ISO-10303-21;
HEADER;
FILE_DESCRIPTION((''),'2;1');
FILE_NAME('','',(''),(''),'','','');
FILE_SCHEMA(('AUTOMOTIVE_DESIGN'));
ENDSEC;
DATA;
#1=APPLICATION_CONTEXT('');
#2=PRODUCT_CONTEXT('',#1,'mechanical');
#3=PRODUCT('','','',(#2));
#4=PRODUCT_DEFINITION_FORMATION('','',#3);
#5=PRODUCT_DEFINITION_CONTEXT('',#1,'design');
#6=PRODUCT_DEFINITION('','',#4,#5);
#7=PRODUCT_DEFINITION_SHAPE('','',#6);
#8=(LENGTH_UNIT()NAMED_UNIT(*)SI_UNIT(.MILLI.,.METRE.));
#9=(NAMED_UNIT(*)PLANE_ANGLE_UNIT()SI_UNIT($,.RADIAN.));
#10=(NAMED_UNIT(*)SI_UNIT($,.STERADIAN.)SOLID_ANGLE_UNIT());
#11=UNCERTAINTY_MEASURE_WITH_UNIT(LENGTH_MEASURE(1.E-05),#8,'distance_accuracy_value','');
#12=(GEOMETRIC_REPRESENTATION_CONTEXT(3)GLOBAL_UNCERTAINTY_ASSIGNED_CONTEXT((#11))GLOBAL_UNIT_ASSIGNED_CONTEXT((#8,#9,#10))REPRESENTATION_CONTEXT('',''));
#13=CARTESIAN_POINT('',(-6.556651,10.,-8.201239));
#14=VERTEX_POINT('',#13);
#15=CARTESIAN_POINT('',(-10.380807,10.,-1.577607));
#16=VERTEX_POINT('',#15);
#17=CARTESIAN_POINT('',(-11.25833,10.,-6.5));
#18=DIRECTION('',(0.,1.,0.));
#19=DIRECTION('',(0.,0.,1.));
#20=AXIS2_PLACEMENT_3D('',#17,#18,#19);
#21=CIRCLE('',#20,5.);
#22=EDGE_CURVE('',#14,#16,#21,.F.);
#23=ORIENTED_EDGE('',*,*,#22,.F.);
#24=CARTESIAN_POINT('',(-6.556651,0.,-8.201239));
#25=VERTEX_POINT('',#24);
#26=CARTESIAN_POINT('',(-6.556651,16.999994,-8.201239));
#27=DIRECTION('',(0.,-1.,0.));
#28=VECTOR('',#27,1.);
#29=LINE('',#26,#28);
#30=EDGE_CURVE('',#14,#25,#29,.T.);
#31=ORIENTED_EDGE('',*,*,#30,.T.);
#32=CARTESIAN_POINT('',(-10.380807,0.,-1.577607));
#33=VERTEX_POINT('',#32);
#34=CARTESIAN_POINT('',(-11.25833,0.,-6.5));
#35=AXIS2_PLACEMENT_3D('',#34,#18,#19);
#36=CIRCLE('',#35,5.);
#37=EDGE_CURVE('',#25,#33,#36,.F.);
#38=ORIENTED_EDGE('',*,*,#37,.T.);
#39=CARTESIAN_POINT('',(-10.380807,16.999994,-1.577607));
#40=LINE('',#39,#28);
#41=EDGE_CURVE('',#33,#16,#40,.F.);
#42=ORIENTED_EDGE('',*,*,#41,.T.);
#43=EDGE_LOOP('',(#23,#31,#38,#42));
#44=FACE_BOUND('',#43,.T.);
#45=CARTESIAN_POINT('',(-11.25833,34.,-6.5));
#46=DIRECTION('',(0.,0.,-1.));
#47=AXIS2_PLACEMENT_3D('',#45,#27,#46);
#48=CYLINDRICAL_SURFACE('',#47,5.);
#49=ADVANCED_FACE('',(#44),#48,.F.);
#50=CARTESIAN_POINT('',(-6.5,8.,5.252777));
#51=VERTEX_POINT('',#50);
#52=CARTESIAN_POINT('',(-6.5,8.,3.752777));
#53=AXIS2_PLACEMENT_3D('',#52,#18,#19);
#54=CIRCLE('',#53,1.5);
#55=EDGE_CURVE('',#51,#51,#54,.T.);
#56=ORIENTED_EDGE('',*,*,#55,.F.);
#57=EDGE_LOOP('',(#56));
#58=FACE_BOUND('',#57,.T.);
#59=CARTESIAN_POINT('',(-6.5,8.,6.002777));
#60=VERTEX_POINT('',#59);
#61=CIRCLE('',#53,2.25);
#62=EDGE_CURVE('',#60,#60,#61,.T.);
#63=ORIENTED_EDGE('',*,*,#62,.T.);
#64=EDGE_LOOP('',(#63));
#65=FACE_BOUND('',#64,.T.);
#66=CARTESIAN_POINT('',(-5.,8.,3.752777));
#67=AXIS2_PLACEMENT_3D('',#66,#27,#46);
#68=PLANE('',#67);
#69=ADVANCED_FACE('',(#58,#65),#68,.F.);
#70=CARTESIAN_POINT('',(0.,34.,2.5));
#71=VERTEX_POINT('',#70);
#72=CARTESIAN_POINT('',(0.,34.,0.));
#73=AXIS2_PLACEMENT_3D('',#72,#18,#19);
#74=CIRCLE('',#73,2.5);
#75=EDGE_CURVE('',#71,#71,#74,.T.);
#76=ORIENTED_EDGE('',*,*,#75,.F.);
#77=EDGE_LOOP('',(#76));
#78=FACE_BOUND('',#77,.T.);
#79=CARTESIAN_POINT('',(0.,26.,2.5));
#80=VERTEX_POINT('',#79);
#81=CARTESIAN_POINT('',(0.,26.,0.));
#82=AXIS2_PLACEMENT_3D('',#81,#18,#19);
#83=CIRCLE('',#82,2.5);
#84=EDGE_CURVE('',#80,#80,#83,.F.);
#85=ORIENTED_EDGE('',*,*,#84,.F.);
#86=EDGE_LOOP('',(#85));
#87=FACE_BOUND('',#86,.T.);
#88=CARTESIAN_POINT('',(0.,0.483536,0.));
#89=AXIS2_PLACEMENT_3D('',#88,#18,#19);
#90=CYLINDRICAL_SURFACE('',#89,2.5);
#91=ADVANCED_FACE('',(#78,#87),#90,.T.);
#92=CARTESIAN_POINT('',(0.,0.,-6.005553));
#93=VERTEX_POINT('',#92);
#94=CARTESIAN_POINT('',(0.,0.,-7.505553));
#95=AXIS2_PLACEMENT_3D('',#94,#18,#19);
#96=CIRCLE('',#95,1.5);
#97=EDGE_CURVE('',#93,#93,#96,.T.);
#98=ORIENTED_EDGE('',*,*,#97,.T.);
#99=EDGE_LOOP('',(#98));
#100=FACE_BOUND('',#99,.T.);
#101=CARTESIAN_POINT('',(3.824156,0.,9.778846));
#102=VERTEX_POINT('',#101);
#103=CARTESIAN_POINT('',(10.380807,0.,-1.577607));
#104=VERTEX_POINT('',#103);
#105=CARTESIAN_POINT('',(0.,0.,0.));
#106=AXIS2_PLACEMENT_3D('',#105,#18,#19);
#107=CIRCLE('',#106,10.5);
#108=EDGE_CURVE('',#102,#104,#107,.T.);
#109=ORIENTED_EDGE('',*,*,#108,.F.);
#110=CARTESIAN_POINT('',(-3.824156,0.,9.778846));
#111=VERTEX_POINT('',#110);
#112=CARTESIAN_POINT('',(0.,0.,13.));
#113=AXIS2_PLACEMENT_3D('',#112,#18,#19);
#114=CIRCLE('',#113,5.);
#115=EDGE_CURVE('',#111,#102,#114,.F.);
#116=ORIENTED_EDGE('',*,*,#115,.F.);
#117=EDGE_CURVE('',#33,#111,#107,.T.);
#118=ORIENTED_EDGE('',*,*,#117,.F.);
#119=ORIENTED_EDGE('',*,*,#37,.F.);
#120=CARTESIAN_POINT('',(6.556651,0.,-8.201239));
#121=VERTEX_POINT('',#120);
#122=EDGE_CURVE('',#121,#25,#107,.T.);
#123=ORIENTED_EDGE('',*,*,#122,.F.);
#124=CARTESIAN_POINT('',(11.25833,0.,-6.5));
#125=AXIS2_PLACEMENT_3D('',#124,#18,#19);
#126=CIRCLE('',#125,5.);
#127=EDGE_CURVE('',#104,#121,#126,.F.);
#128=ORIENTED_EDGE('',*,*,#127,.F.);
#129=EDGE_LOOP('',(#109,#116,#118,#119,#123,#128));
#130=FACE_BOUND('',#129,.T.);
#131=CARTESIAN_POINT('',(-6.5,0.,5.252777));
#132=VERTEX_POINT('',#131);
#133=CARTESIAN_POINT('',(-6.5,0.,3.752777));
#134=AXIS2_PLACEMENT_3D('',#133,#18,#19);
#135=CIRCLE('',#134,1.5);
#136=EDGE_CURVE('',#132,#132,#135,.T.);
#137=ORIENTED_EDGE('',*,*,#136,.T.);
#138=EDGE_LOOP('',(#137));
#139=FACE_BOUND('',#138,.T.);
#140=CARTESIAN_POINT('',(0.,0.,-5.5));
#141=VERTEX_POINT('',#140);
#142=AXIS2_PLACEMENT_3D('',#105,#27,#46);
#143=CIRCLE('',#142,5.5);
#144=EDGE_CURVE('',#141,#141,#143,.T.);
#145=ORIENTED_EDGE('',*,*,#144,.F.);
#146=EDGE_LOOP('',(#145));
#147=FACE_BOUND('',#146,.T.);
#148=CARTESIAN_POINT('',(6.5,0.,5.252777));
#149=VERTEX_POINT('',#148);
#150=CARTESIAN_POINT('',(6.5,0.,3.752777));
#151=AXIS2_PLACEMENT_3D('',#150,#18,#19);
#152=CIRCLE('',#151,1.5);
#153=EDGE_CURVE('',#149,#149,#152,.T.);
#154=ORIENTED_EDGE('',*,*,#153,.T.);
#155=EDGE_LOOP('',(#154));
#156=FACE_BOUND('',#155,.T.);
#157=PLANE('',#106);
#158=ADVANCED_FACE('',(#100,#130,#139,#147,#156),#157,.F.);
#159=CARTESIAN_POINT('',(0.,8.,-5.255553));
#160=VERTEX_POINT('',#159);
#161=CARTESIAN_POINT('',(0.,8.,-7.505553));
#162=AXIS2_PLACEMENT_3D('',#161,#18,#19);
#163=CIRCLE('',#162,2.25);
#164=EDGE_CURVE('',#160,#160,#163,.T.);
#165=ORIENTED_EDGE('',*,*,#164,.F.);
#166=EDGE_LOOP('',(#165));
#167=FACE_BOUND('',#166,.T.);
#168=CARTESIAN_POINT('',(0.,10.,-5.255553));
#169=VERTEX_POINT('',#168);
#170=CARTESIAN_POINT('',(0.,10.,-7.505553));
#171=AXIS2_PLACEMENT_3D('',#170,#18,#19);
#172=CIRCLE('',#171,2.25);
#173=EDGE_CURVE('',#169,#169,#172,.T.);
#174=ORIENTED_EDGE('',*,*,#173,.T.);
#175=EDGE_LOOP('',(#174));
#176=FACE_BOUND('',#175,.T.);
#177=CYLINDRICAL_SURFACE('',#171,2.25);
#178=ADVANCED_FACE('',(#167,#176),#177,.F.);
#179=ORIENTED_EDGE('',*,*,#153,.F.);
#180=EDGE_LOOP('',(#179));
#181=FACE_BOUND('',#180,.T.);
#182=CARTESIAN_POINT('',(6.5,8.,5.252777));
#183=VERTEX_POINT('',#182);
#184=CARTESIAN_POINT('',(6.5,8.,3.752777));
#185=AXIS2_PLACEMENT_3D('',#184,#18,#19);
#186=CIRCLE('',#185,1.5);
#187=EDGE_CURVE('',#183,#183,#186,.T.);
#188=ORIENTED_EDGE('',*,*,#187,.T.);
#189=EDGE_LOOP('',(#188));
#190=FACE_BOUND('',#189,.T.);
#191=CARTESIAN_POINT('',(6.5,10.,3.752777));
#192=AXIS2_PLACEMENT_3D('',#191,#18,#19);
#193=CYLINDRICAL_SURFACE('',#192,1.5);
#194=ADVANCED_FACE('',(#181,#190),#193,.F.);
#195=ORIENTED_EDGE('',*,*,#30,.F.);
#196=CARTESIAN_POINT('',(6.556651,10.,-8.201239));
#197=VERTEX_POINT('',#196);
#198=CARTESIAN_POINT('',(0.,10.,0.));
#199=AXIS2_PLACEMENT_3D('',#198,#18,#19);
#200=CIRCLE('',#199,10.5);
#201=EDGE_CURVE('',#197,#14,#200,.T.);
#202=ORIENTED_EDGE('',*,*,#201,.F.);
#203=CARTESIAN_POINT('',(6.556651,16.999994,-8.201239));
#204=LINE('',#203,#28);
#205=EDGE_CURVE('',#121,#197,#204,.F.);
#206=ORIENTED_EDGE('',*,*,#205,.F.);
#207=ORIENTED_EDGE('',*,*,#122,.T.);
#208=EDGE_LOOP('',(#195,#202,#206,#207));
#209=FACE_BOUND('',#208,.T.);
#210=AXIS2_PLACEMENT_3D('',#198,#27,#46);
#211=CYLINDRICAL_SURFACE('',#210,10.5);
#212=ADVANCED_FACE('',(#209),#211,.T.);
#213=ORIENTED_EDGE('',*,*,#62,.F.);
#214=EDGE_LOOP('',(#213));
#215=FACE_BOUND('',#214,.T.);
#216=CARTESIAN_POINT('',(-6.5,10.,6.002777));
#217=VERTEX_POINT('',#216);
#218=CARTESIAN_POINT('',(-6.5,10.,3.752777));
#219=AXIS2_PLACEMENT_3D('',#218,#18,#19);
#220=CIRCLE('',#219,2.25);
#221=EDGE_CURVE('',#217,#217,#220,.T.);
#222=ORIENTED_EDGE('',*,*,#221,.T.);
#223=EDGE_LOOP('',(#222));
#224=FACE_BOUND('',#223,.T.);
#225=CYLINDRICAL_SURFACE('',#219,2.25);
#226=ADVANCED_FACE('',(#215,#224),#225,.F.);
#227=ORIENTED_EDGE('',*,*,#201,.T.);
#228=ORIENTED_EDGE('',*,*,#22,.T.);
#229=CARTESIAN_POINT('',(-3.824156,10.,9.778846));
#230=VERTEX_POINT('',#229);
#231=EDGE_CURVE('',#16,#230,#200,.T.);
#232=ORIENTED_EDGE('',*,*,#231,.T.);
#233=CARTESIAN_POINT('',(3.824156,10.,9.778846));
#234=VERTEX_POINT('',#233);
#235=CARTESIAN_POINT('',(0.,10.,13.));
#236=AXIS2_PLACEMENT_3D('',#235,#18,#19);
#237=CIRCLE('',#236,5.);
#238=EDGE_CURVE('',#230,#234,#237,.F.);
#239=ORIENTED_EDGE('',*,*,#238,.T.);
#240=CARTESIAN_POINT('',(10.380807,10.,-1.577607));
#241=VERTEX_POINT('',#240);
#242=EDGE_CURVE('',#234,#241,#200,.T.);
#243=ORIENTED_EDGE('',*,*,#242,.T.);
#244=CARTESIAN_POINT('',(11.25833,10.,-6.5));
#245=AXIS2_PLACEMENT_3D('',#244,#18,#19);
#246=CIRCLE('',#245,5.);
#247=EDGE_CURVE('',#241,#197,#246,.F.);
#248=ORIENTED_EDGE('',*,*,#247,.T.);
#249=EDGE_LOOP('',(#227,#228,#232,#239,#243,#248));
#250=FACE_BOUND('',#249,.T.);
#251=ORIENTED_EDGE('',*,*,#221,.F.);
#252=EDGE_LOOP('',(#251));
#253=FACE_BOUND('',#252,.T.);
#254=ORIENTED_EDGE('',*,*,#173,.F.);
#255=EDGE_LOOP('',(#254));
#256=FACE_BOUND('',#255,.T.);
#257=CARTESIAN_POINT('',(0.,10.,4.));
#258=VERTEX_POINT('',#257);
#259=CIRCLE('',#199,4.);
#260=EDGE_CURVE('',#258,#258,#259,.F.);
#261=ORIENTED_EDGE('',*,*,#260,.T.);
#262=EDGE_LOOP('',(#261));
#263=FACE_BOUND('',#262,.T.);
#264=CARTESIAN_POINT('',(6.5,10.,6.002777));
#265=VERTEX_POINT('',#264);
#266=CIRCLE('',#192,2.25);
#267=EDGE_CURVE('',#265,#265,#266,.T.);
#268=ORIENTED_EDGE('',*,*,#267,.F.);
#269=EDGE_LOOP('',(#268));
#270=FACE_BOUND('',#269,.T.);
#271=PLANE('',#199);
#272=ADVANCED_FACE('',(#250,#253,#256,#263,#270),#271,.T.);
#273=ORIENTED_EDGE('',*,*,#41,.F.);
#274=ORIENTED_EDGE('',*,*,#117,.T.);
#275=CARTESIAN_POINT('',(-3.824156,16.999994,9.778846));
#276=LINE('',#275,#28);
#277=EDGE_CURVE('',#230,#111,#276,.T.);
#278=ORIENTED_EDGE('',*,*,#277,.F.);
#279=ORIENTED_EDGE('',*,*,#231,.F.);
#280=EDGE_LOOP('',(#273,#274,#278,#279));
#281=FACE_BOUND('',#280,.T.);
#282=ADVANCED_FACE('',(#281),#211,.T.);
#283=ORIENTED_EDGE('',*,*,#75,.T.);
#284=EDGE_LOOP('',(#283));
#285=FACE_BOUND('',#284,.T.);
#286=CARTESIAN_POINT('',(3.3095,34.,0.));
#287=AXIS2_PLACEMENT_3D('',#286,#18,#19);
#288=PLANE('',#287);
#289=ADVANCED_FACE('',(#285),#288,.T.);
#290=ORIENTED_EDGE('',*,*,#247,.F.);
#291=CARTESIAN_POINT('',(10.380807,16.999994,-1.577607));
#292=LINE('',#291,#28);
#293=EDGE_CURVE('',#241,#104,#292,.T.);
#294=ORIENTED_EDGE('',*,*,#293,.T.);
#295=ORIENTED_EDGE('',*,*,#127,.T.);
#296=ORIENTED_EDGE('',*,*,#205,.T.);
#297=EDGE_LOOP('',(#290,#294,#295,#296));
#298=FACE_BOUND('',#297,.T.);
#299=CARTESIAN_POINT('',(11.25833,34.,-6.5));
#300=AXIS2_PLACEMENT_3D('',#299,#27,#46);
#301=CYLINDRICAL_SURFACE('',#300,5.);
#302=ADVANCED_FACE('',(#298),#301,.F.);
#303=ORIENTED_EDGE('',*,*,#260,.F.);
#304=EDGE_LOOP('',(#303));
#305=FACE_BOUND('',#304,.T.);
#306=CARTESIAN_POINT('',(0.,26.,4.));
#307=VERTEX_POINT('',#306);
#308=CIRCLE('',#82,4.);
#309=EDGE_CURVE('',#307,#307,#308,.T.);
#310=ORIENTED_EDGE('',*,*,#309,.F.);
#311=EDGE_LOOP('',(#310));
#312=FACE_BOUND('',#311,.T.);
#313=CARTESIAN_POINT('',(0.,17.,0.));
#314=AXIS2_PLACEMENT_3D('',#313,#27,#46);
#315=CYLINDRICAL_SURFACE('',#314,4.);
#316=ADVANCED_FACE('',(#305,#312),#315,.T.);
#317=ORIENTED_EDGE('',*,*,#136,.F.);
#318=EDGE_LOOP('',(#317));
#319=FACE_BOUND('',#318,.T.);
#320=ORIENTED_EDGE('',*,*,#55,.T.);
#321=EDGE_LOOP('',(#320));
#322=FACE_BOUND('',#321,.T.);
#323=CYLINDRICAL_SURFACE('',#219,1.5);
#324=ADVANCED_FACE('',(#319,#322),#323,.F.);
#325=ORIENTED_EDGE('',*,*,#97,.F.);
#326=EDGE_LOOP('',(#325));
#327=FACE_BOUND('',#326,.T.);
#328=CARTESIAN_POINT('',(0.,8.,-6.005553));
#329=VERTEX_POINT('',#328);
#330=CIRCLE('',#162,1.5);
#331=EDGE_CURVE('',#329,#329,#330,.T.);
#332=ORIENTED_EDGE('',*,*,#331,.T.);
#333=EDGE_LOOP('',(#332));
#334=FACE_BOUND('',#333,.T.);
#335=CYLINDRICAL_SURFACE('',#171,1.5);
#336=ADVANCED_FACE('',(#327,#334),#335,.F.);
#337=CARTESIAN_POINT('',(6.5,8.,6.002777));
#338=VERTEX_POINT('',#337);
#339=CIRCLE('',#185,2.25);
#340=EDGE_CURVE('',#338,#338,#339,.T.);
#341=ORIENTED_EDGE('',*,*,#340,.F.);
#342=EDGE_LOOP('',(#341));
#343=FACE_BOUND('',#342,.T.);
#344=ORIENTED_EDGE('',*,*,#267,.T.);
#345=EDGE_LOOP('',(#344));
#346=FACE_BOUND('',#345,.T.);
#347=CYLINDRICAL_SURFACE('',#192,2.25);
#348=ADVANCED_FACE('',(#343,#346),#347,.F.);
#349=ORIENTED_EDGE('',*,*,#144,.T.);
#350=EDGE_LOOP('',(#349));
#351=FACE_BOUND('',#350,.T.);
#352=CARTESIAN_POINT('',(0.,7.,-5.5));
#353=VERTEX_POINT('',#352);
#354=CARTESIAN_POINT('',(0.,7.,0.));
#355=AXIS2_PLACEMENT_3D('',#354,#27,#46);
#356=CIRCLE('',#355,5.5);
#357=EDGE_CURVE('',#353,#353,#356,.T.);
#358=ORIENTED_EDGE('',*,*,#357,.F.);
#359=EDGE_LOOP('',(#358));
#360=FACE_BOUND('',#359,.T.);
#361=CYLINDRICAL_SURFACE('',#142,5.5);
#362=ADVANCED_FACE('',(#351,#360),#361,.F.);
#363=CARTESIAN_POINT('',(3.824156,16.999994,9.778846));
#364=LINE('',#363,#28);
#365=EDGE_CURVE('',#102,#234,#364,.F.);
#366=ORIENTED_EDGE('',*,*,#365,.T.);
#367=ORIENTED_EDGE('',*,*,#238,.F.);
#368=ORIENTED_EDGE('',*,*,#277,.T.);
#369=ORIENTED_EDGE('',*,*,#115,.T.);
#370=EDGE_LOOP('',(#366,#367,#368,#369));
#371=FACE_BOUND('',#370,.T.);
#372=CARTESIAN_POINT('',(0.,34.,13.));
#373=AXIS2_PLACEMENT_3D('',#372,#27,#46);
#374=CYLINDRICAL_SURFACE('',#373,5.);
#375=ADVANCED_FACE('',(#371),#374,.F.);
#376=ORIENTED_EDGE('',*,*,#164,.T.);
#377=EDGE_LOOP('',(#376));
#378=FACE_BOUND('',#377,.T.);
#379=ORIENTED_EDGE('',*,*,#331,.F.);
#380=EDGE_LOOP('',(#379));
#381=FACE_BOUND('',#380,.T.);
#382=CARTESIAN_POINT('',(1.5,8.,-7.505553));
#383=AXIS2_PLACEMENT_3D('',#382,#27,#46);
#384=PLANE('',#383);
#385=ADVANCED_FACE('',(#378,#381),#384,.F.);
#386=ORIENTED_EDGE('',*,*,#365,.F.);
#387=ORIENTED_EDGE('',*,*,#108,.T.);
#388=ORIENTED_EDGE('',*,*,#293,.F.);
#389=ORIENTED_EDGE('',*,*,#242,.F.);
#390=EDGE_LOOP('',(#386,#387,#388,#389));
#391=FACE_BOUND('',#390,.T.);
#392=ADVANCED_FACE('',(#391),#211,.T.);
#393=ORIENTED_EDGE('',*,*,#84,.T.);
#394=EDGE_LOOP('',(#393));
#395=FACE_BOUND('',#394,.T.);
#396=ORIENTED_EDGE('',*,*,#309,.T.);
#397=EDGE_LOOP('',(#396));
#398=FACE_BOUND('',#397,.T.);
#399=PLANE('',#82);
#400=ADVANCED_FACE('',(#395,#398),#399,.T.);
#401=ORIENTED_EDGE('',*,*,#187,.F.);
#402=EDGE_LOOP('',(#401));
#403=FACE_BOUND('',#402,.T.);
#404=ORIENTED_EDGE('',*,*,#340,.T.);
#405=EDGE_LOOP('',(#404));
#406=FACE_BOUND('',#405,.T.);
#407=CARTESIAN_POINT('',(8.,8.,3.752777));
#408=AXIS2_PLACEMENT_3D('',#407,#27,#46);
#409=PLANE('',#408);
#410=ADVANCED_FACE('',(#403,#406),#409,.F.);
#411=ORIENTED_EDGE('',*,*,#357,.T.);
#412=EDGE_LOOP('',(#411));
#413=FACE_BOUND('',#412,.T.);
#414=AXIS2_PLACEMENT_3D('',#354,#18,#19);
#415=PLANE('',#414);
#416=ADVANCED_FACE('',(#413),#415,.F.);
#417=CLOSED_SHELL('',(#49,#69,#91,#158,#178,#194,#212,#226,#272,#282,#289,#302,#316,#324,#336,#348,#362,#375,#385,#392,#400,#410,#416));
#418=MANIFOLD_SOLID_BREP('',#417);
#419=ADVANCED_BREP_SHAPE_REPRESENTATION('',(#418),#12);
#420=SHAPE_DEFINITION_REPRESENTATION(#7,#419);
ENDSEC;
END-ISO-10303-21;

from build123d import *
from build123d.topology import SkipClean

# Parameters (mm, degrees)
SKETCH1_R               = 10.5
SKETCH1_R_2             = 4
BOSS_EXTRUDE1_DEPTH     = 10
SKETCH1_3_R             = 4
BOSS_EXTRUDE2_DEPTH     = 17
CUT_EXTRUDE3_DEPTH      = 38.101212918
CUT_EXTRUDE3_DEPTH_BACK = 38.101212918
SKETCH4_R               = 5
HOLE1_D                 = 3
HOLE1_DEPTH             = 10
HOLE1_CBORE_D           = 4.5
HOLE1_CBORE_DEPTH       = 2
HOLE1_TIP               = 0.901290929
HOLE2_D                 = 11
HOLE2_DEPTH             = 7
SKETCH10_R              = 8.667878953
SKETCH10_R_2            = 2.5
CUT_EXTRUDE4_DEPTH      = 8


# Read off the part's stored shape, not the designer's step: M8x1.25 Machine Threads Stud1
with BuildPart() as part:
    # Sketch1 → Boss-Extrude1 (new body)
    # profile 1 of 2: a face of its own
    with BuildSketch(Plane(origin=(0, 0, 0), x_dir=(1, 0, 0), z_dir=(0, 1, 0))):
        with Locations(Location((0, 0, 0), (0, 0, 270))):
            Circle(SKETCH1_R)
        Circle(SKETCH1_R_2, mode=Mode.SUBTRACT)
    # profile 2 of 2: a face of its own
    with BuildSketch(Plane(origin=(0, 0, 0), x_dir=(1, 0, 0), z_dir=(0, 1, 0))):
        Circle(SKETCH1_R_2)
    extrude(amount=BOSS_EXTRUDE1_DEPTH)

    # Sketch1<3> → Boss-Extrude2 (add)
    with BuildSketch(Plane(origin=(0, 0, 0), x_dir=(1, 0, 0), z_dir=(0, 1, 0))):
        with Locations(Location((0, 0, 0), (0, 0, 270))):
            Circle(SKETCH1_3_R)
    extrude(amount=BOSS_EXTRUDE2_DEPTH)

    # M8x1.25 Machine Threads Stud1 outline → M8x1.25 Machine Threads Stud1 (revolve)
    with SkipClean():  # the faces are left unmerged after this step: merging them gives an invalid solid
        with BuildSketch(Plane.XY):
            Polygon((4, 17), (4, 33.3095), (3.3095, 34), (0, 34), (0, 17), align=None)
        revolve(axis=Axis((0, 0, 0), (0, 1, 0)))

    # Sketch4 → Cut-Extrude3 (cut, two sides: drawn at the far end of the back side and taken through both)
    with SkipClean():  # the faces are left unmerged after this step: merging them gives an invalid solid
        with BuildSketch(Plane(origin=(0, 0, 0), x_dir=(1, 0, 0), z_dir=(0, 1, 0)).offset(-CUT_EXTRUDE3_DEPTH_BACK)):
            with Locations((0, -13)):
                Circle(SKETCH4_R)
            with Locations((-11.258330249, 6.5)):
                Circle(SKETCH4_R)
            with Locations((11.258330249, 6.5)):
                Circle(SKETCH4_R)
        extrude(amount=CUT_EXTRUDE3_DEPTH + CUT_EXTRUDE3_DEPTH_BACK, mode=Mode.SUBTRACT)

    # Hole1
    with Locations(Plane(origin=(0, 10, 0), x_dir=(1, 0, 0), z_dir=(0, 1, 0))):
        with Locations((0, 7.505553499), (6.5, -3.75277675), (-6.5, -3.75277675)):
            CounterBoreHole(HOLE1_D / 2, HOLE1_CBORE_D / 2, HOLE1_CBORE_DEPTH, depth=HOLE1_DEPTH)
            with Locations((0, 0, -(HOLE1_DEPTH + HOLE1_TIP / 2))):  # 118° drill point
                Cone(0, HOLE1_D / 2, HOLE1_TIP, mode=Mode.SUBTRACT)

    # Hole2
    with Locations(Plane(origin=(0, 0, 0), x_dir=(-1, 0, 0), z_dir=(0, -1, 0))):
        with Locations((0, 0)):
            Hole(HOLE2_D / 2, depth=HOLE2_DEPTH)

    # Sketch10 → Cut-Extrude4 (cut)
    with SkipClean():  # the faces are left unmerged after this step: merging them gives an invalid solid
        with BuildSketch(Plane(origin=(0, 34, 0), x_dir=(1, 0, 0), z_dir=(0, 1, 0))):
            Circle(SKETCH10_R)
            with Locations(Location((0, 0, 0), (0, 0, 270))):
                Circle(SKETCH10_R_2, mode=Mode.SUBTRACT)
        extrude(amount=-CUT_EXTRUDE4_DEPTH, mode=Mode.SUBTRACT)
    add(part.part.scale(1), mode=Mode.REPLACE)  # the faces are merged on a copy


solid = part.part
